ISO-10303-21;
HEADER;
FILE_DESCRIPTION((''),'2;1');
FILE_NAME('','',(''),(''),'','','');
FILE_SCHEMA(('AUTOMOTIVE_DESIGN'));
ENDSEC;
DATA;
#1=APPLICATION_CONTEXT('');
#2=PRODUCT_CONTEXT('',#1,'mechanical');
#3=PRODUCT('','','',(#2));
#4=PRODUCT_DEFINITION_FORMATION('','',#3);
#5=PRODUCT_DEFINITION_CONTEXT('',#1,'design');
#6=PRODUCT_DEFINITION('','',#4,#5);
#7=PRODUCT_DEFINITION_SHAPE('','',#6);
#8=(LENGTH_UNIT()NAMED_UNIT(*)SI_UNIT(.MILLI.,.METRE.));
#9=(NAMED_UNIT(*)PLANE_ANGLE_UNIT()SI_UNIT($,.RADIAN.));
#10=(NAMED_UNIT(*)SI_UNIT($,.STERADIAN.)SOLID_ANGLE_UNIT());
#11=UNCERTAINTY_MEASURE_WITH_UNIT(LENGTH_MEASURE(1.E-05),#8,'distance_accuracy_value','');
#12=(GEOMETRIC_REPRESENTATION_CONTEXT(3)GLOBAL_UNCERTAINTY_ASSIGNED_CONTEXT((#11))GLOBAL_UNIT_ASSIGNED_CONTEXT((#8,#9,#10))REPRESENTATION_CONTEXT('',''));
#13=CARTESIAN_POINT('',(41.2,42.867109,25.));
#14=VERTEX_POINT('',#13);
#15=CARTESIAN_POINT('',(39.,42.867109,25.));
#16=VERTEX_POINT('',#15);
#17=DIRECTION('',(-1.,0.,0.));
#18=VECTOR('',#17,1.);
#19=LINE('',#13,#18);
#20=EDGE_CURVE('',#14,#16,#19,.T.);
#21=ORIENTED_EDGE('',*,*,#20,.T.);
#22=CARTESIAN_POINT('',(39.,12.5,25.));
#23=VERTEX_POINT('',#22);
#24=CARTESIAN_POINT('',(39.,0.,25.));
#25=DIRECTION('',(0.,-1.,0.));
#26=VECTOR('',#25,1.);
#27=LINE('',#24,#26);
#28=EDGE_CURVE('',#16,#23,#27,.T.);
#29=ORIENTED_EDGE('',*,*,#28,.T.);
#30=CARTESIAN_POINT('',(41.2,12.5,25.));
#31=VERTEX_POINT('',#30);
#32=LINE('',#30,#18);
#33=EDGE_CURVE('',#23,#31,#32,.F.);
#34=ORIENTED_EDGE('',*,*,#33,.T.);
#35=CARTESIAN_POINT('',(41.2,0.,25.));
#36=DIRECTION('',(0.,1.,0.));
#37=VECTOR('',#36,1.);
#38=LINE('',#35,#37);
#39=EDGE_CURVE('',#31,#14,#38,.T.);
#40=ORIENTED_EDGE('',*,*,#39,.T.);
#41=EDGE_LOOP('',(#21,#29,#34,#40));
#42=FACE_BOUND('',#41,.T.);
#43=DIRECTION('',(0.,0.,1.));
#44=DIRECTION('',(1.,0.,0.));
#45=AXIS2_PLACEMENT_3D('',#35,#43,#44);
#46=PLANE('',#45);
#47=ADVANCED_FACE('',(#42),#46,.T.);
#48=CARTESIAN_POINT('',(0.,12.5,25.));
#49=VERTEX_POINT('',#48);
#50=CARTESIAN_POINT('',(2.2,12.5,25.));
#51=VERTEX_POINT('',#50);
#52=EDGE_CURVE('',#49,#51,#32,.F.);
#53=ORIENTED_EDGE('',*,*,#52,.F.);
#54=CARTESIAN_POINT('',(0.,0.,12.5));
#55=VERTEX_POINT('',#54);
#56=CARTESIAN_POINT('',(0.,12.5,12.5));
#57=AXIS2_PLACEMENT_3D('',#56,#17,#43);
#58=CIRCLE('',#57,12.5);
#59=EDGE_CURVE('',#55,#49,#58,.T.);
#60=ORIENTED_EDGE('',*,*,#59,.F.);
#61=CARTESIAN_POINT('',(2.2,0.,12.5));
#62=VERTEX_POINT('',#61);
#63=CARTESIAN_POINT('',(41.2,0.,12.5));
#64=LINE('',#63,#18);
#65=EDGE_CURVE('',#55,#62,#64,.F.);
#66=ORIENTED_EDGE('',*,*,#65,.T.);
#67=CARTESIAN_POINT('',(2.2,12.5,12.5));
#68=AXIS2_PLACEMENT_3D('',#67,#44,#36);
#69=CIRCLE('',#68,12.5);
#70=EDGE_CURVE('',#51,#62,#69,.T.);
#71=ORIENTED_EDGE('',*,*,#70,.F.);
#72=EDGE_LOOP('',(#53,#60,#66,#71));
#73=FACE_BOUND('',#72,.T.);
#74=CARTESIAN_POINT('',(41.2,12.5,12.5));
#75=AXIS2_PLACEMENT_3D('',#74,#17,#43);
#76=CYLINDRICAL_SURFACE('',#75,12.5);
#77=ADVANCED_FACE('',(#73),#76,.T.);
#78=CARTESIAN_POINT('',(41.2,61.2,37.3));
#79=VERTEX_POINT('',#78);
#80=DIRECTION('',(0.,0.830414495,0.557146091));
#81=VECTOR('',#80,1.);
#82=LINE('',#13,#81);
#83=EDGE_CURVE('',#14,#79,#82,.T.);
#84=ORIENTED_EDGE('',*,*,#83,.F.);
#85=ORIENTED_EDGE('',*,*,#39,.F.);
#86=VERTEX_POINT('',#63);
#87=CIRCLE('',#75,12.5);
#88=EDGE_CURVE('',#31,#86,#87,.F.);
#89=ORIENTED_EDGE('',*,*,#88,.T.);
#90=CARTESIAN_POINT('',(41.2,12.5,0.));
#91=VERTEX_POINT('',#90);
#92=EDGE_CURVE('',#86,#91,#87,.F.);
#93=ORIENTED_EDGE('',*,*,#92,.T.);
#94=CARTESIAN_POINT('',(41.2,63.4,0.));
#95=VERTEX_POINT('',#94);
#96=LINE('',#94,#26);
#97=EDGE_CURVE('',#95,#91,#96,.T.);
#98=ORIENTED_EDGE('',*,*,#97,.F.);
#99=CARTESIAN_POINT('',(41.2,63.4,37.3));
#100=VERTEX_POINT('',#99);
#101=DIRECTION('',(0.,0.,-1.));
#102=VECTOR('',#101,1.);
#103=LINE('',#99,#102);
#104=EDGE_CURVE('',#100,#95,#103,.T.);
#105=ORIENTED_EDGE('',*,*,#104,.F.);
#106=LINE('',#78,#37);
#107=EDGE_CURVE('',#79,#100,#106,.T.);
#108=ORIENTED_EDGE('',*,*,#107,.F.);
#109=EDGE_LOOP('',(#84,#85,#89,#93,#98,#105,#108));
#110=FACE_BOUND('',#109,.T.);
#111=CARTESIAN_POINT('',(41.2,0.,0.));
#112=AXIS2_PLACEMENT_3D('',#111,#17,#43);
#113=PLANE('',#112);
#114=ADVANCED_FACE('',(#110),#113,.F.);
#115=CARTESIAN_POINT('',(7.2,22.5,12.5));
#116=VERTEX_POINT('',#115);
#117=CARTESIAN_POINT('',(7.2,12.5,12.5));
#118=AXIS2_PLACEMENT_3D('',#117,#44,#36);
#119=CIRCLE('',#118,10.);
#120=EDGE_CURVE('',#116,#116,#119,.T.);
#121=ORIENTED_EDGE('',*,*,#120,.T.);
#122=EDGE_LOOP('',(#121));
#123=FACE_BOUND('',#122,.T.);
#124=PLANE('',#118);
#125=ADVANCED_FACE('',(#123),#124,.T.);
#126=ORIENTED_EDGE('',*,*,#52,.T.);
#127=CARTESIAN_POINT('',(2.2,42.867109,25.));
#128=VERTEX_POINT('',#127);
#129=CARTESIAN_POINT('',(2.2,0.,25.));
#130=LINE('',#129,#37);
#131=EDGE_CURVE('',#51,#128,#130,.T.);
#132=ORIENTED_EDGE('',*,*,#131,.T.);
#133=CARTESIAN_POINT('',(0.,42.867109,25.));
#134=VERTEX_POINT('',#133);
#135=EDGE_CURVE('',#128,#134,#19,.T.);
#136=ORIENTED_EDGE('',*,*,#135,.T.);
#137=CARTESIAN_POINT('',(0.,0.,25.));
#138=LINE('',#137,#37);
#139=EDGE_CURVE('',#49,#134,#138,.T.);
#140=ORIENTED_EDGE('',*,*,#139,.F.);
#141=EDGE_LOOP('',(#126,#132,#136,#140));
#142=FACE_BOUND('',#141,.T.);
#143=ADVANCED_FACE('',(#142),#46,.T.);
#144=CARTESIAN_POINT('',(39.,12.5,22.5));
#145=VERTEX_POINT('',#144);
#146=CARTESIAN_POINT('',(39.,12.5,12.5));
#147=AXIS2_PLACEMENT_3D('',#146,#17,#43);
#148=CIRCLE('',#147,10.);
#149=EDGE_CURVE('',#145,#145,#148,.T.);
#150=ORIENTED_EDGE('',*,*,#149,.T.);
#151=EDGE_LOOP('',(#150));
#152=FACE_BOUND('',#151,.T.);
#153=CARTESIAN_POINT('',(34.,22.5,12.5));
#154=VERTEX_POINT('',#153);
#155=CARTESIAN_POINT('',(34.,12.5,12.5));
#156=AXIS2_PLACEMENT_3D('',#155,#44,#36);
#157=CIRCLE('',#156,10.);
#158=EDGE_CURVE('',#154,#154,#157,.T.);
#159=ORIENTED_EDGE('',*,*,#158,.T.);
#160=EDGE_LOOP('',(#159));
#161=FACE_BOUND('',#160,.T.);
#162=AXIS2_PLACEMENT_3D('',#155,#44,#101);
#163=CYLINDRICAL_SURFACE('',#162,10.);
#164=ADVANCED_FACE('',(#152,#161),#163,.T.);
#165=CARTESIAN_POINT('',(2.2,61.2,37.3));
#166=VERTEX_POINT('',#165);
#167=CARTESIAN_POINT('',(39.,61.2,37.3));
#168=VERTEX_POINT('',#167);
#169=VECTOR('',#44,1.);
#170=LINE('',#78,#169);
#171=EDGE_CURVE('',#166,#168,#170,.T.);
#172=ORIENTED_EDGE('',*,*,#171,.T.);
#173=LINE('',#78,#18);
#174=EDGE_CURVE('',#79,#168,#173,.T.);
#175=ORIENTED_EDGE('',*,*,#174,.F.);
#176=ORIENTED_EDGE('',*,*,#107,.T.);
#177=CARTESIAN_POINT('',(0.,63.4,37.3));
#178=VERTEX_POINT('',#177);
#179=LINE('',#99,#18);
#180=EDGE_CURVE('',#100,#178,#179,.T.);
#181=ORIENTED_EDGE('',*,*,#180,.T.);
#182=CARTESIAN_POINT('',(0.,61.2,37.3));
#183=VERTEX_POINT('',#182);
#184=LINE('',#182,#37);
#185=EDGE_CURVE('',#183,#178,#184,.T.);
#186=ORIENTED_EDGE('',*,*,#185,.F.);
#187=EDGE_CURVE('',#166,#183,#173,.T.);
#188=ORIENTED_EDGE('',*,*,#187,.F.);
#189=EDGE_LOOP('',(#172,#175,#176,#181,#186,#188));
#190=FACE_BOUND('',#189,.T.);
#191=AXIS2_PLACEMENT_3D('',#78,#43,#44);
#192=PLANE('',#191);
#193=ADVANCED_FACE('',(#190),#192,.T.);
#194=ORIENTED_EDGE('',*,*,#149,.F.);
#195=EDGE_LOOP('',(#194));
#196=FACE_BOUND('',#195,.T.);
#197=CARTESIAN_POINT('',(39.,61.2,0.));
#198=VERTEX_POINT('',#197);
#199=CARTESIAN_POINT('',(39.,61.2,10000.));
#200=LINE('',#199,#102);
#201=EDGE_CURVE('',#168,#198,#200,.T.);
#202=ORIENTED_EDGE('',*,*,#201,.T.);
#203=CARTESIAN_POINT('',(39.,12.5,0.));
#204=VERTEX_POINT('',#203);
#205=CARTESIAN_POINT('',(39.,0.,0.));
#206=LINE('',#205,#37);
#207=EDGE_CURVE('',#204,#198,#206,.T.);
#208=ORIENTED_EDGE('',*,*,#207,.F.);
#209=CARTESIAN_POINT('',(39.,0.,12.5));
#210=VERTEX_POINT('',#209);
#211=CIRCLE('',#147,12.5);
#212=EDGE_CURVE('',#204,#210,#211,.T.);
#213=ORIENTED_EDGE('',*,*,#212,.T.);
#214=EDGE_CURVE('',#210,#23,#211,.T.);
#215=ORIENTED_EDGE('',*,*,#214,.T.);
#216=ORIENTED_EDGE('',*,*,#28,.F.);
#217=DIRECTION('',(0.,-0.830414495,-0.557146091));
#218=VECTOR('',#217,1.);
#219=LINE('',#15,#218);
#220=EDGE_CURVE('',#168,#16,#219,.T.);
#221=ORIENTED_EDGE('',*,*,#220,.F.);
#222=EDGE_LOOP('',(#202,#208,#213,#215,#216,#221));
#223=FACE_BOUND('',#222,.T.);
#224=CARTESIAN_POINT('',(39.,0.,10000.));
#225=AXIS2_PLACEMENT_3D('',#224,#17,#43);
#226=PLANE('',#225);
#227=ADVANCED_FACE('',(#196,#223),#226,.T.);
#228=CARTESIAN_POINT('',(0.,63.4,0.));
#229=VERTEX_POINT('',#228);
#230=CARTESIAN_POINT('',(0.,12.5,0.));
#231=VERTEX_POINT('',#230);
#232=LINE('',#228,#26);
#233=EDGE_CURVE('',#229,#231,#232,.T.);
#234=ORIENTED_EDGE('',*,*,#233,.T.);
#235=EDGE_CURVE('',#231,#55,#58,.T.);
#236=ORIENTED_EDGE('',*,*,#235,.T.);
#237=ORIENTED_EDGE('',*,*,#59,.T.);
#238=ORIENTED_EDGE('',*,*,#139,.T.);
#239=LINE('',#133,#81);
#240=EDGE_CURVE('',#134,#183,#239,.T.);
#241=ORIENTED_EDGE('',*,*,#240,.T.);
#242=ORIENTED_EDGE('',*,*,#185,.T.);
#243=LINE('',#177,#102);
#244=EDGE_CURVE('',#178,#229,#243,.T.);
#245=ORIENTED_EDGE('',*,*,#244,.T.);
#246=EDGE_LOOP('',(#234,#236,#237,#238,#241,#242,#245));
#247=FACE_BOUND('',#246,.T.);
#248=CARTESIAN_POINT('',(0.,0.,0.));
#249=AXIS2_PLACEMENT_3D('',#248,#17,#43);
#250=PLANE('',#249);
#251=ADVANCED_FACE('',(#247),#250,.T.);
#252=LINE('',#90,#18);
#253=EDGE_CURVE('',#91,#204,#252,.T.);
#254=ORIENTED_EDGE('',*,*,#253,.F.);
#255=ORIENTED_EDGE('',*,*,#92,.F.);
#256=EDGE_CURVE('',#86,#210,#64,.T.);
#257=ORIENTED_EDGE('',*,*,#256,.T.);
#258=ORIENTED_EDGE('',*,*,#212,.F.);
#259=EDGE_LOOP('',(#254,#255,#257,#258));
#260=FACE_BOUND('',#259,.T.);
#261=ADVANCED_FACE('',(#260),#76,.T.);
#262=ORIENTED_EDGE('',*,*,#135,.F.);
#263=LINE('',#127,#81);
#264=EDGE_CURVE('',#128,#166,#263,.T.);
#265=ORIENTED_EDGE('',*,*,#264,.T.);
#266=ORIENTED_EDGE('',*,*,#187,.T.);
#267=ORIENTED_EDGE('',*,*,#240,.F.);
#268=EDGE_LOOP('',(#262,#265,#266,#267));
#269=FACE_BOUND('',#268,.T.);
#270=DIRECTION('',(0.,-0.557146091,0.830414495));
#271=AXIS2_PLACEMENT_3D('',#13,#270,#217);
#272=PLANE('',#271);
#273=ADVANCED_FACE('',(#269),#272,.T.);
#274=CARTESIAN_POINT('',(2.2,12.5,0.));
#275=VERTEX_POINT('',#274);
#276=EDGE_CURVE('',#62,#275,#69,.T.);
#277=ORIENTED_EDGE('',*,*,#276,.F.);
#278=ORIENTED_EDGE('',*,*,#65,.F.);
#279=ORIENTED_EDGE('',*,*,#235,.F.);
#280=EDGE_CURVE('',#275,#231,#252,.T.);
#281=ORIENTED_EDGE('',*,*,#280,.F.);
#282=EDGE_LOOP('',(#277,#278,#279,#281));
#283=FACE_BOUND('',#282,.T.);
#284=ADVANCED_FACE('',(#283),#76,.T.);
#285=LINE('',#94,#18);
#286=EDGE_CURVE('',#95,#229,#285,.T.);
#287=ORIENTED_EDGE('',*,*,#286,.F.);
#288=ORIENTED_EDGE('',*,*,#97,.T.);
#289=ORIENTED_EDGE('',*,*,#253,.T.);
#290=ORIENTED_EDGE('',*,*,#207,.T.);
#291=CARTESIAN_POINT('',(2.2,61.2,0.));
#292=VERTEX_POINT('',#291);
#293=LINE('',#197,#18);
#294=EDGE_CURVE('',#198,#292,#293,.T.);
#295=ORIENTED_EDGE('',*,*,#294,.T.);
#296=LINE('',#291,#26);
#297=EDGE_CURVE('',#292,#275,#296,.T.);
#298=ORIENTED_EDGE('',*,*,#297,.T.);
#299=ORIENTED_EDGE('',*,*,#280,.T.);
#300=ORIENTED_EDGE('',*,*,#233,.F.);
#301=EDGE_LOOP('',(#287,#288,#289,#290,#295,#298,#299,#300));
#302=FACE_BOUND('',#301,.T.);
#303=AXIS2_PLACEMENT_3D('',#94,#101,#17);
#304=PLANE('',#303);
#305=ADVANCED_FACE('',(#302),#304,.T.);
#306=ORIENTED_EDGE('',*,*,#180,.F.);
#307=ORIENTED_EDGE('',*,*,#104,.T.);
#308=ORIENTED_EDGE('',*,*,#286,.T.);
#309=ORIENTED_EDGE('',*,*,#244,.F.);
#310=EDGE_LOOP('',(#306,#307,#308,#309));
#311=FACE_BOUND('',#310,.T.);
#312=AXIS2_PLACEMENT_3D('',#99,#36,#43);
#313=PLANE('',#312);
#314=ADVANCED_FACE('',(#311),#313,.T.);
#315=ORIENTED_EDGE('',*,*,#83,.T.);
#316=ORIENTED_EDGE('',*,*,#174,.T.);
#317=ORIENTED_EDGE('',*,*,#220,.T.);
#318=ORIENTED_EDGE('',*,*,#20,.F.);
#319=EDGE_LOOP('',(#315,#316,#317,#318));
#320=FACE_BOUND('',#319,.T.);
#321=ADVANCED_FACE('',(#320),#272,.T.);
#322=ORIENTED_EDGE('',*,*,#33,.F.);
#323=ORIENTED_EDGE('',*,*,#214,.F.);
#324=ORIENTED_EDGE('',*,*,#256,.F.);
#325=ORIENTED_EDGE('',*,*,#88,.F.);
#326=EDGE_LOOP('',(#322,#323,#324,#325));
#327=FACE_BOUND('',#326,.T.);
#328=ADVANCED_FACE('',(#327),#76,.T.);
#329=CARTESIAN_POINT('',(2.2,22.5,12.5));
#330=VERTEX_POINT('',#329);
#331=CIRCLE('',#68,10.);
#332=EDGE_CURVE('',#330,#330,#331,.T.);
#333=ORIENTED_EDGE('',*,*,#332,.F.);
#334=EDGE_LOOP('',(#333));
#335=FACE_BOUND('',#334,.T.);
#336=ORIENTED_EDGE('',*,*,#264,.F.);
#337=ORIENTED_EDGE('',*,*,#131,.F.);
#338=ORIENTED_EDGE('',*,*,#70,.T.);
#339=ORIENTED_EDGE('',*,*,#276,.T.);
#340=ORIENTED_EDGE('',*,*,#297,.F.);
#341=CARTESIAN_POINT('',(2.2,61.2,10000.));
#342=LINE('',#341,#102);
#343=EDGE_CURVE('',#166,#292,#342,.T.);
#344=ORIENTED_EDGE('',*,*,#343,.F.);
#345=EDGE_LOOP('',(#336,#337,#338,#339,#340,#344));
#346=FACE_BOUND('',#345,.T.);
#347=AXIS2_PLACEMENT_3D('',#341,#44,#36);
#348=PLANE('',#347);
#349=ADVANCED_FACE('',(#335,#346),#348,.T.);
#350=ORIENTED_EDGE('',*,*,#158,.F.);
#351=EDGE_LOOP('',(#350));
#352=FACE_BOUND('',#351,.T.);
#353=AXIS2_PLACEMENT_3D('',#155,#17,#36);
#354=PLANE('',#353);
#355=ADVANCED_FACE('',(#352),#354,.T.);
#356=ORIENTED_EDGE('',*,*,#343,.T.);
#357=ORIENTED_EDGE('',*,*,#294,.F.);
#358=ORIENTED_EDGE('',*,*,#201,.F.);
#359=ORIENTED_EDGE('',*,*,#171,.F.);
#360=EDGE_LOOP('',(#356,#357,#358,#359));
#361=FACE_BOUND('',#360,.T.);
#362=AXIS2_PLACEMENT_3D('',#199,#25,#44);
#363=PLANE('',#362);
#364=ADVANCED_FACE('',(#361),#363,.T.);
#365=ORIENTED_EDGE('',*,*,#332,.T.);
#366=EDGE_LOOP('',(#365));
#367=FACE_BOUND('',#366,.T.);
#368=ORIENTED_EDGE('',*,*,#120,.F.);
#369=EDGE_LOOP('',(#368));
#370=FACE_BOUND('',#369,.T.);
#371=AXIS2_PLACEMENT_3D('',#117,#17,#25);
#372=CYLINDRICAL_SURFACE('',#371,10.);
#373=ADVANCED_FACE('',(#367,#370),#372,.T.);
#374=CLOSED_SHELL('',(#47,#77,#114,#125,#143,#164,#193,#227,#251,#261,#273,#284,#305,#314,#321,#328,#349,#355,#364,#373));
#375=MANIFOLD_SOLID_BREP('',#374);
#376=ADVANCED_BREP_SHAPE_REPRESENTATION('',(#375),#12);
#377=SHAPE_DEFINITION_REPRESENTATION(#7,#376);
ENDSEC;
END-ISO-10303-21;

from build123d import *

# Parameters (mm, degrees)
BOSS_EXTRUDE1_DEPTH = 41.2
SKETCH4_W           = 36.8
SKETCH4_H           = 61.2
CUT_EXTRUDE1_DEPTH  = 10000
SKETCH5_R           = 10
BOSS_EXTRUDE2_DEPTH = 5
FILLET1_R           = 12.5


with BuildPart() as part:
    # Sketch2 → Boss-Extrude1 (new body)
    with BuildSketch(Plane(origin=(0, 0, 0), x_dir=(0, 0, -1), z_dir=(1, 0, 0))):
        Polygon((0, 0), (-25, 0), (-25, 42.867109497), (-37.3, 61.2), (-37.3, 63.4), (0, 63.4), align=None)
    extrude(amount=BOSS_EXTRUDE1_DEPTH)

    # Sketch4 → Cut-Extrude1 (cut)
    with BuildSketch(Plane.XY):
        with Locations((20.6, 30.6)):
            Rectangle(SKETCH4_W, SKETCH4_H)
    extrude(amount=CUT_EXTRUDE1_DEPTH, mode=Mode.SUBTRACT)

    # Sketch5 → Boss-Extrude2 (add)
    with BuildSketch(Plane(origin=(2.2, 0, 0), x_dir=(0, 0, -1), z_dir=(1, 0, 0))):
        with Locations(Location((-12.5, 12.5, 0), (0, 0, 90))):
            Circle(SKETCH5_R)
    boss_extrude2 = extrude(amount=BOSS_EXTRUDE2_DEPTH)

    # Mirror1: Boss-Extrude2 across plane
    add(boss_extrude2.mirror(Plane(origin=(20.6, 0, 0), x_dir=(0, 0, 1), z_dir=(1, 0, 0))))

    # Fillet1
    fillet1_edges = [part.edges().sort_by_distance(p)[0] for p in [
        (1.1, 0, 25),
        (1.1, 0, 0),
        (40.1, 0, 0),
        (40.1, 0, 25),
    ]]
    fillet(fillet1_edges, radius=FILLET1_R - 0.0001)  # a hair under: the kernel refuses the full size


solid = part.part
